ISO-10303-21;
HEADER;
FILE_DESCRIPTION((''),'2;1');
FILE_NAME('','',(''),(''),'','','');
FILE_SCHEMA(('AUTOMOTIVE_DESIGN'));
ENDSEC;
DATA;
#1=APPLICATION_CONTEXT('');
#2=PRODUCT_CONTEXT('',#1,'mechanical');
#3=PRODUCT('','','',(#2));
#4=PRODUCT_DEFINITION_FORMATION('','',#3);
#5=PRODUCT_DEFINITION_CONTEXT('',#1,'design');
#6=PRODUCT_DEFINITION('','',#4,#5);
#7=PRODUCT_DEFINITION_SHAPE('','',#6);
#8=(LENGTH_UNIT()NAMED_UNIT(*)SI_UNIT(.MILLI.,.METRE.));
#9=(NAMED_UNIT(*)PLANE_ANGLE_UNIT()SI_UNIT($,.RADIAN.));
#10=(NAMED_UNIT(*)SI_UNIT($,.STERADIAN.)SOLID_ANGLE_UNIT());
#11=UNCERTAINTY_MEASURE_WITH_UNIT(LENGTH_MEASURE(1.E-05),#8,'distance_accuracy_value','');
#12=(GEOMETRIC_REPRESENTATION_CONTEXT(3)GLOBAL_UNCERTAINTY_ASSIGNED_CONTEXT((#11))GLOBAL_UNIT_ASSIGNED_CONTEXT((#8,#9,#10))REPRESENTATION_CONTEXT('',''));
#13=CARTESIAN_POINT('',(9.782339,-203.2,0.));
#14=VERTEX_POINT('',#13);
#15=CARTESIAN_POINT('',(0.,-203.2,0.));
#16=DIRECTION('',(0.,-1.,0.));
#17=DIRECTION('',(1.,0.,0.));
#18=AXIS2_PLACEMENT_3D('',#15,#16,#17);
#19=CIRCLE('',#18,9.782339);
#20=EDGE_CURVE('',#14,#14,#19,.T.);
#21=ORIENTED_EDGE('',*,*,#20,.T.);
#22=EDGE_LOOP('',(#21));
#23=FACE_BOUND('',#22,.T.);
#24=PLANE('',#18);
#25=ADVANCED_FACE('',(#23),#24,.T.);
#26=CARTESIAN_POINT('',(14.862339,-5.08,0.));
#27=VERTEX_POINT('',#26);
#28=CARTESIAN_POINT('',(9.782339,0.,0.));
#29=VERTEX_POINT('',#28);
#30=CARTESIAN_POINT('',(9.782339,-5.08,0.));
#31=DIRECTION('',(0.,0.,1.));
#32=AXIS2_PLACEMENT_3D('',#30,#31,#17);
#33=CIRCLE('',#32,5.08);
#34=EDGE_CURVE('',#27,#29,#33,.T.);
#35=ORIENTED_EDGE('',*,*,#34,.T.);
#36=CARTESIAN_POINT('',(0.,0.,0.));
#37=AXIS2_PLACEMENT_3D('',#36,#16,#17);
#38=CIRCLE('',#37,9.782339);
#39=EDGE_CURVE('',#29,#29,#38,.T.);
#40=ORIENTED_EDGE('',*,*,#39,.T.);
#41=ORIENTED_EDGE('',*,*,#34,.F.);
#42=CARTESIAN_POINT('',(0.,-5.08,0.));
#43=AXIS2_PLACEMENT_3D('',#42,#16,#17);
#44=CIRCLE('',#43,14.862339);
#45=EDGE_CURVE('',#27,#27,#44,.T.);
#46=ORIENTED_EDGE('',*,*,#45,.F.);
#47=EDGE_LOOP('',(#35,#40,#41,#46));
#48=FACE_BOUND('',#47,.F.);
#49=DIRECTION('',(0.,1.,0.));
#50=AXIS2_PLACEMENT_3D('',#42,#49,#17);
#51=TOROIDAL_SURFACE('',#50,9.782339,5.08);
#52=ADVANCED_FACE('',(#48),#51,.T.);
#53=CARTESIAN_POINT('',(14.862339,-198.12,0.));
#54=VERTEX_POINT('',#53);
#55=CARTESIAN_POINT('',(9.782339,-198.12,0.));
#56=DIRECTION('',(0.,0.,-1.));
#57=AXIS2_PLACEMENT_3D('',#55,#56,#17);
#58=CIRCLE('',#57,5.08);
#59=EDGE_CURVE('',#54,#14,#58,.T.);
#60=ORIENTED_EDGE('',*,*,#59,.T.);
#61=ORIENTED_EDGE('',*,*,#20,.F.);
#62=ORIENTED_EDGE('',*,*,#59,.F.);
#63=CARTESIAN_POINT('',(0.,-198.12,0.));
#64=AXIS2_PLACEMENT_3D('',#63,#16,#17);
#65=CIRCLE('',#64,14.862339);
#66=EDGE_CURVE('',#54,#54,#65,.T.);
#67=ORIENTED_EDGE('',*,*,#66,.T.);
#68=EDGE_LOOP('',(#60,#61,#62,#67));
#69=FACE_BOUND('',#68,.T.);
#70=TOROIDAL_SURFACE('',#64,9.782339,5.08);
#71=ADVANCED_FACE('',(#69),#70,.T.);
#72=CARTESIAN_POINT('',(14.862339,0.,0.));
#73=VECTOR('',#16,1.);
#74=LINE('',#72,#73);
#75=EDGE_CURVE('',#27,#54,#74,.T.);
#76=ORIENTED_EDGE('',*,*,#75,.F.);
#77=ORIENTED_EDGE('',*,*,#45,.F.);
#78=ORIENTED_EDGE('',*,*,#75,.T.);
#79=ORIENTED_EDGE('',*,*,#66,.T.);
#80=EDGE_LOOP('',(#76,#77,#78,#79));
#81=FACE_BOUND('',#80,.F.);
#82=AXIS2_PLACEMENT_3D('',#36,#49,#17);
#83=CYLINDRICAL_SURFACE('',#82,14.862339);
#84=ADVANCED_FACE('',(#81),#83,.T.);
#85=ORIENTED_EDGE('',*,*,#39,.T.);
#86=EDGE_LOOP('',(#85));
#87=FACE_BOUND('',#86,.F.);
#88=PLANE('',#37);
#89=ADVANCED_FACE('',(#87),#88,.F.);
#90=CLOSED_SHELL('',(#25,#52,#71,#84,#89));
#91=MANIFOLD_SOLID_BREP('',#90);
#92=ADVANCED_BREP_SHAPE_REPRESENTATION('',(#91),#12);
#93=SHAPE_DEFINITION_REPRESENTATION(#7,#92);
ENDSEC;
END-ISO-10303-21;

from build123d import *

# Parameters (mm, degrees)
F0_R     = 14.8623385086
F1_DEPTH = 203.2
F2_R     = 5.08


# Not quite as in the source:
# - a feature of the source that left no trace in its solid (it failed there, or was rolled back) is left out


with BuildPart() as f1:
    # F0 (on Front) → F1 (new body)
    with BuildSketch(Plane.XZ):
        Circle(F0_R)
    extrude(amount=F1_DEPTH)

    # F2
    f2_edges = [f1.edges().sort_by_distance(p)[0] for p in [
        (14.862339, -101.6, 0),
        (-14.862339, 0, 0),
        (-14.862339, -203.2, 0),
    ]]
    fillet(f2_edges, radius=F2_R)


solid = f1.part
